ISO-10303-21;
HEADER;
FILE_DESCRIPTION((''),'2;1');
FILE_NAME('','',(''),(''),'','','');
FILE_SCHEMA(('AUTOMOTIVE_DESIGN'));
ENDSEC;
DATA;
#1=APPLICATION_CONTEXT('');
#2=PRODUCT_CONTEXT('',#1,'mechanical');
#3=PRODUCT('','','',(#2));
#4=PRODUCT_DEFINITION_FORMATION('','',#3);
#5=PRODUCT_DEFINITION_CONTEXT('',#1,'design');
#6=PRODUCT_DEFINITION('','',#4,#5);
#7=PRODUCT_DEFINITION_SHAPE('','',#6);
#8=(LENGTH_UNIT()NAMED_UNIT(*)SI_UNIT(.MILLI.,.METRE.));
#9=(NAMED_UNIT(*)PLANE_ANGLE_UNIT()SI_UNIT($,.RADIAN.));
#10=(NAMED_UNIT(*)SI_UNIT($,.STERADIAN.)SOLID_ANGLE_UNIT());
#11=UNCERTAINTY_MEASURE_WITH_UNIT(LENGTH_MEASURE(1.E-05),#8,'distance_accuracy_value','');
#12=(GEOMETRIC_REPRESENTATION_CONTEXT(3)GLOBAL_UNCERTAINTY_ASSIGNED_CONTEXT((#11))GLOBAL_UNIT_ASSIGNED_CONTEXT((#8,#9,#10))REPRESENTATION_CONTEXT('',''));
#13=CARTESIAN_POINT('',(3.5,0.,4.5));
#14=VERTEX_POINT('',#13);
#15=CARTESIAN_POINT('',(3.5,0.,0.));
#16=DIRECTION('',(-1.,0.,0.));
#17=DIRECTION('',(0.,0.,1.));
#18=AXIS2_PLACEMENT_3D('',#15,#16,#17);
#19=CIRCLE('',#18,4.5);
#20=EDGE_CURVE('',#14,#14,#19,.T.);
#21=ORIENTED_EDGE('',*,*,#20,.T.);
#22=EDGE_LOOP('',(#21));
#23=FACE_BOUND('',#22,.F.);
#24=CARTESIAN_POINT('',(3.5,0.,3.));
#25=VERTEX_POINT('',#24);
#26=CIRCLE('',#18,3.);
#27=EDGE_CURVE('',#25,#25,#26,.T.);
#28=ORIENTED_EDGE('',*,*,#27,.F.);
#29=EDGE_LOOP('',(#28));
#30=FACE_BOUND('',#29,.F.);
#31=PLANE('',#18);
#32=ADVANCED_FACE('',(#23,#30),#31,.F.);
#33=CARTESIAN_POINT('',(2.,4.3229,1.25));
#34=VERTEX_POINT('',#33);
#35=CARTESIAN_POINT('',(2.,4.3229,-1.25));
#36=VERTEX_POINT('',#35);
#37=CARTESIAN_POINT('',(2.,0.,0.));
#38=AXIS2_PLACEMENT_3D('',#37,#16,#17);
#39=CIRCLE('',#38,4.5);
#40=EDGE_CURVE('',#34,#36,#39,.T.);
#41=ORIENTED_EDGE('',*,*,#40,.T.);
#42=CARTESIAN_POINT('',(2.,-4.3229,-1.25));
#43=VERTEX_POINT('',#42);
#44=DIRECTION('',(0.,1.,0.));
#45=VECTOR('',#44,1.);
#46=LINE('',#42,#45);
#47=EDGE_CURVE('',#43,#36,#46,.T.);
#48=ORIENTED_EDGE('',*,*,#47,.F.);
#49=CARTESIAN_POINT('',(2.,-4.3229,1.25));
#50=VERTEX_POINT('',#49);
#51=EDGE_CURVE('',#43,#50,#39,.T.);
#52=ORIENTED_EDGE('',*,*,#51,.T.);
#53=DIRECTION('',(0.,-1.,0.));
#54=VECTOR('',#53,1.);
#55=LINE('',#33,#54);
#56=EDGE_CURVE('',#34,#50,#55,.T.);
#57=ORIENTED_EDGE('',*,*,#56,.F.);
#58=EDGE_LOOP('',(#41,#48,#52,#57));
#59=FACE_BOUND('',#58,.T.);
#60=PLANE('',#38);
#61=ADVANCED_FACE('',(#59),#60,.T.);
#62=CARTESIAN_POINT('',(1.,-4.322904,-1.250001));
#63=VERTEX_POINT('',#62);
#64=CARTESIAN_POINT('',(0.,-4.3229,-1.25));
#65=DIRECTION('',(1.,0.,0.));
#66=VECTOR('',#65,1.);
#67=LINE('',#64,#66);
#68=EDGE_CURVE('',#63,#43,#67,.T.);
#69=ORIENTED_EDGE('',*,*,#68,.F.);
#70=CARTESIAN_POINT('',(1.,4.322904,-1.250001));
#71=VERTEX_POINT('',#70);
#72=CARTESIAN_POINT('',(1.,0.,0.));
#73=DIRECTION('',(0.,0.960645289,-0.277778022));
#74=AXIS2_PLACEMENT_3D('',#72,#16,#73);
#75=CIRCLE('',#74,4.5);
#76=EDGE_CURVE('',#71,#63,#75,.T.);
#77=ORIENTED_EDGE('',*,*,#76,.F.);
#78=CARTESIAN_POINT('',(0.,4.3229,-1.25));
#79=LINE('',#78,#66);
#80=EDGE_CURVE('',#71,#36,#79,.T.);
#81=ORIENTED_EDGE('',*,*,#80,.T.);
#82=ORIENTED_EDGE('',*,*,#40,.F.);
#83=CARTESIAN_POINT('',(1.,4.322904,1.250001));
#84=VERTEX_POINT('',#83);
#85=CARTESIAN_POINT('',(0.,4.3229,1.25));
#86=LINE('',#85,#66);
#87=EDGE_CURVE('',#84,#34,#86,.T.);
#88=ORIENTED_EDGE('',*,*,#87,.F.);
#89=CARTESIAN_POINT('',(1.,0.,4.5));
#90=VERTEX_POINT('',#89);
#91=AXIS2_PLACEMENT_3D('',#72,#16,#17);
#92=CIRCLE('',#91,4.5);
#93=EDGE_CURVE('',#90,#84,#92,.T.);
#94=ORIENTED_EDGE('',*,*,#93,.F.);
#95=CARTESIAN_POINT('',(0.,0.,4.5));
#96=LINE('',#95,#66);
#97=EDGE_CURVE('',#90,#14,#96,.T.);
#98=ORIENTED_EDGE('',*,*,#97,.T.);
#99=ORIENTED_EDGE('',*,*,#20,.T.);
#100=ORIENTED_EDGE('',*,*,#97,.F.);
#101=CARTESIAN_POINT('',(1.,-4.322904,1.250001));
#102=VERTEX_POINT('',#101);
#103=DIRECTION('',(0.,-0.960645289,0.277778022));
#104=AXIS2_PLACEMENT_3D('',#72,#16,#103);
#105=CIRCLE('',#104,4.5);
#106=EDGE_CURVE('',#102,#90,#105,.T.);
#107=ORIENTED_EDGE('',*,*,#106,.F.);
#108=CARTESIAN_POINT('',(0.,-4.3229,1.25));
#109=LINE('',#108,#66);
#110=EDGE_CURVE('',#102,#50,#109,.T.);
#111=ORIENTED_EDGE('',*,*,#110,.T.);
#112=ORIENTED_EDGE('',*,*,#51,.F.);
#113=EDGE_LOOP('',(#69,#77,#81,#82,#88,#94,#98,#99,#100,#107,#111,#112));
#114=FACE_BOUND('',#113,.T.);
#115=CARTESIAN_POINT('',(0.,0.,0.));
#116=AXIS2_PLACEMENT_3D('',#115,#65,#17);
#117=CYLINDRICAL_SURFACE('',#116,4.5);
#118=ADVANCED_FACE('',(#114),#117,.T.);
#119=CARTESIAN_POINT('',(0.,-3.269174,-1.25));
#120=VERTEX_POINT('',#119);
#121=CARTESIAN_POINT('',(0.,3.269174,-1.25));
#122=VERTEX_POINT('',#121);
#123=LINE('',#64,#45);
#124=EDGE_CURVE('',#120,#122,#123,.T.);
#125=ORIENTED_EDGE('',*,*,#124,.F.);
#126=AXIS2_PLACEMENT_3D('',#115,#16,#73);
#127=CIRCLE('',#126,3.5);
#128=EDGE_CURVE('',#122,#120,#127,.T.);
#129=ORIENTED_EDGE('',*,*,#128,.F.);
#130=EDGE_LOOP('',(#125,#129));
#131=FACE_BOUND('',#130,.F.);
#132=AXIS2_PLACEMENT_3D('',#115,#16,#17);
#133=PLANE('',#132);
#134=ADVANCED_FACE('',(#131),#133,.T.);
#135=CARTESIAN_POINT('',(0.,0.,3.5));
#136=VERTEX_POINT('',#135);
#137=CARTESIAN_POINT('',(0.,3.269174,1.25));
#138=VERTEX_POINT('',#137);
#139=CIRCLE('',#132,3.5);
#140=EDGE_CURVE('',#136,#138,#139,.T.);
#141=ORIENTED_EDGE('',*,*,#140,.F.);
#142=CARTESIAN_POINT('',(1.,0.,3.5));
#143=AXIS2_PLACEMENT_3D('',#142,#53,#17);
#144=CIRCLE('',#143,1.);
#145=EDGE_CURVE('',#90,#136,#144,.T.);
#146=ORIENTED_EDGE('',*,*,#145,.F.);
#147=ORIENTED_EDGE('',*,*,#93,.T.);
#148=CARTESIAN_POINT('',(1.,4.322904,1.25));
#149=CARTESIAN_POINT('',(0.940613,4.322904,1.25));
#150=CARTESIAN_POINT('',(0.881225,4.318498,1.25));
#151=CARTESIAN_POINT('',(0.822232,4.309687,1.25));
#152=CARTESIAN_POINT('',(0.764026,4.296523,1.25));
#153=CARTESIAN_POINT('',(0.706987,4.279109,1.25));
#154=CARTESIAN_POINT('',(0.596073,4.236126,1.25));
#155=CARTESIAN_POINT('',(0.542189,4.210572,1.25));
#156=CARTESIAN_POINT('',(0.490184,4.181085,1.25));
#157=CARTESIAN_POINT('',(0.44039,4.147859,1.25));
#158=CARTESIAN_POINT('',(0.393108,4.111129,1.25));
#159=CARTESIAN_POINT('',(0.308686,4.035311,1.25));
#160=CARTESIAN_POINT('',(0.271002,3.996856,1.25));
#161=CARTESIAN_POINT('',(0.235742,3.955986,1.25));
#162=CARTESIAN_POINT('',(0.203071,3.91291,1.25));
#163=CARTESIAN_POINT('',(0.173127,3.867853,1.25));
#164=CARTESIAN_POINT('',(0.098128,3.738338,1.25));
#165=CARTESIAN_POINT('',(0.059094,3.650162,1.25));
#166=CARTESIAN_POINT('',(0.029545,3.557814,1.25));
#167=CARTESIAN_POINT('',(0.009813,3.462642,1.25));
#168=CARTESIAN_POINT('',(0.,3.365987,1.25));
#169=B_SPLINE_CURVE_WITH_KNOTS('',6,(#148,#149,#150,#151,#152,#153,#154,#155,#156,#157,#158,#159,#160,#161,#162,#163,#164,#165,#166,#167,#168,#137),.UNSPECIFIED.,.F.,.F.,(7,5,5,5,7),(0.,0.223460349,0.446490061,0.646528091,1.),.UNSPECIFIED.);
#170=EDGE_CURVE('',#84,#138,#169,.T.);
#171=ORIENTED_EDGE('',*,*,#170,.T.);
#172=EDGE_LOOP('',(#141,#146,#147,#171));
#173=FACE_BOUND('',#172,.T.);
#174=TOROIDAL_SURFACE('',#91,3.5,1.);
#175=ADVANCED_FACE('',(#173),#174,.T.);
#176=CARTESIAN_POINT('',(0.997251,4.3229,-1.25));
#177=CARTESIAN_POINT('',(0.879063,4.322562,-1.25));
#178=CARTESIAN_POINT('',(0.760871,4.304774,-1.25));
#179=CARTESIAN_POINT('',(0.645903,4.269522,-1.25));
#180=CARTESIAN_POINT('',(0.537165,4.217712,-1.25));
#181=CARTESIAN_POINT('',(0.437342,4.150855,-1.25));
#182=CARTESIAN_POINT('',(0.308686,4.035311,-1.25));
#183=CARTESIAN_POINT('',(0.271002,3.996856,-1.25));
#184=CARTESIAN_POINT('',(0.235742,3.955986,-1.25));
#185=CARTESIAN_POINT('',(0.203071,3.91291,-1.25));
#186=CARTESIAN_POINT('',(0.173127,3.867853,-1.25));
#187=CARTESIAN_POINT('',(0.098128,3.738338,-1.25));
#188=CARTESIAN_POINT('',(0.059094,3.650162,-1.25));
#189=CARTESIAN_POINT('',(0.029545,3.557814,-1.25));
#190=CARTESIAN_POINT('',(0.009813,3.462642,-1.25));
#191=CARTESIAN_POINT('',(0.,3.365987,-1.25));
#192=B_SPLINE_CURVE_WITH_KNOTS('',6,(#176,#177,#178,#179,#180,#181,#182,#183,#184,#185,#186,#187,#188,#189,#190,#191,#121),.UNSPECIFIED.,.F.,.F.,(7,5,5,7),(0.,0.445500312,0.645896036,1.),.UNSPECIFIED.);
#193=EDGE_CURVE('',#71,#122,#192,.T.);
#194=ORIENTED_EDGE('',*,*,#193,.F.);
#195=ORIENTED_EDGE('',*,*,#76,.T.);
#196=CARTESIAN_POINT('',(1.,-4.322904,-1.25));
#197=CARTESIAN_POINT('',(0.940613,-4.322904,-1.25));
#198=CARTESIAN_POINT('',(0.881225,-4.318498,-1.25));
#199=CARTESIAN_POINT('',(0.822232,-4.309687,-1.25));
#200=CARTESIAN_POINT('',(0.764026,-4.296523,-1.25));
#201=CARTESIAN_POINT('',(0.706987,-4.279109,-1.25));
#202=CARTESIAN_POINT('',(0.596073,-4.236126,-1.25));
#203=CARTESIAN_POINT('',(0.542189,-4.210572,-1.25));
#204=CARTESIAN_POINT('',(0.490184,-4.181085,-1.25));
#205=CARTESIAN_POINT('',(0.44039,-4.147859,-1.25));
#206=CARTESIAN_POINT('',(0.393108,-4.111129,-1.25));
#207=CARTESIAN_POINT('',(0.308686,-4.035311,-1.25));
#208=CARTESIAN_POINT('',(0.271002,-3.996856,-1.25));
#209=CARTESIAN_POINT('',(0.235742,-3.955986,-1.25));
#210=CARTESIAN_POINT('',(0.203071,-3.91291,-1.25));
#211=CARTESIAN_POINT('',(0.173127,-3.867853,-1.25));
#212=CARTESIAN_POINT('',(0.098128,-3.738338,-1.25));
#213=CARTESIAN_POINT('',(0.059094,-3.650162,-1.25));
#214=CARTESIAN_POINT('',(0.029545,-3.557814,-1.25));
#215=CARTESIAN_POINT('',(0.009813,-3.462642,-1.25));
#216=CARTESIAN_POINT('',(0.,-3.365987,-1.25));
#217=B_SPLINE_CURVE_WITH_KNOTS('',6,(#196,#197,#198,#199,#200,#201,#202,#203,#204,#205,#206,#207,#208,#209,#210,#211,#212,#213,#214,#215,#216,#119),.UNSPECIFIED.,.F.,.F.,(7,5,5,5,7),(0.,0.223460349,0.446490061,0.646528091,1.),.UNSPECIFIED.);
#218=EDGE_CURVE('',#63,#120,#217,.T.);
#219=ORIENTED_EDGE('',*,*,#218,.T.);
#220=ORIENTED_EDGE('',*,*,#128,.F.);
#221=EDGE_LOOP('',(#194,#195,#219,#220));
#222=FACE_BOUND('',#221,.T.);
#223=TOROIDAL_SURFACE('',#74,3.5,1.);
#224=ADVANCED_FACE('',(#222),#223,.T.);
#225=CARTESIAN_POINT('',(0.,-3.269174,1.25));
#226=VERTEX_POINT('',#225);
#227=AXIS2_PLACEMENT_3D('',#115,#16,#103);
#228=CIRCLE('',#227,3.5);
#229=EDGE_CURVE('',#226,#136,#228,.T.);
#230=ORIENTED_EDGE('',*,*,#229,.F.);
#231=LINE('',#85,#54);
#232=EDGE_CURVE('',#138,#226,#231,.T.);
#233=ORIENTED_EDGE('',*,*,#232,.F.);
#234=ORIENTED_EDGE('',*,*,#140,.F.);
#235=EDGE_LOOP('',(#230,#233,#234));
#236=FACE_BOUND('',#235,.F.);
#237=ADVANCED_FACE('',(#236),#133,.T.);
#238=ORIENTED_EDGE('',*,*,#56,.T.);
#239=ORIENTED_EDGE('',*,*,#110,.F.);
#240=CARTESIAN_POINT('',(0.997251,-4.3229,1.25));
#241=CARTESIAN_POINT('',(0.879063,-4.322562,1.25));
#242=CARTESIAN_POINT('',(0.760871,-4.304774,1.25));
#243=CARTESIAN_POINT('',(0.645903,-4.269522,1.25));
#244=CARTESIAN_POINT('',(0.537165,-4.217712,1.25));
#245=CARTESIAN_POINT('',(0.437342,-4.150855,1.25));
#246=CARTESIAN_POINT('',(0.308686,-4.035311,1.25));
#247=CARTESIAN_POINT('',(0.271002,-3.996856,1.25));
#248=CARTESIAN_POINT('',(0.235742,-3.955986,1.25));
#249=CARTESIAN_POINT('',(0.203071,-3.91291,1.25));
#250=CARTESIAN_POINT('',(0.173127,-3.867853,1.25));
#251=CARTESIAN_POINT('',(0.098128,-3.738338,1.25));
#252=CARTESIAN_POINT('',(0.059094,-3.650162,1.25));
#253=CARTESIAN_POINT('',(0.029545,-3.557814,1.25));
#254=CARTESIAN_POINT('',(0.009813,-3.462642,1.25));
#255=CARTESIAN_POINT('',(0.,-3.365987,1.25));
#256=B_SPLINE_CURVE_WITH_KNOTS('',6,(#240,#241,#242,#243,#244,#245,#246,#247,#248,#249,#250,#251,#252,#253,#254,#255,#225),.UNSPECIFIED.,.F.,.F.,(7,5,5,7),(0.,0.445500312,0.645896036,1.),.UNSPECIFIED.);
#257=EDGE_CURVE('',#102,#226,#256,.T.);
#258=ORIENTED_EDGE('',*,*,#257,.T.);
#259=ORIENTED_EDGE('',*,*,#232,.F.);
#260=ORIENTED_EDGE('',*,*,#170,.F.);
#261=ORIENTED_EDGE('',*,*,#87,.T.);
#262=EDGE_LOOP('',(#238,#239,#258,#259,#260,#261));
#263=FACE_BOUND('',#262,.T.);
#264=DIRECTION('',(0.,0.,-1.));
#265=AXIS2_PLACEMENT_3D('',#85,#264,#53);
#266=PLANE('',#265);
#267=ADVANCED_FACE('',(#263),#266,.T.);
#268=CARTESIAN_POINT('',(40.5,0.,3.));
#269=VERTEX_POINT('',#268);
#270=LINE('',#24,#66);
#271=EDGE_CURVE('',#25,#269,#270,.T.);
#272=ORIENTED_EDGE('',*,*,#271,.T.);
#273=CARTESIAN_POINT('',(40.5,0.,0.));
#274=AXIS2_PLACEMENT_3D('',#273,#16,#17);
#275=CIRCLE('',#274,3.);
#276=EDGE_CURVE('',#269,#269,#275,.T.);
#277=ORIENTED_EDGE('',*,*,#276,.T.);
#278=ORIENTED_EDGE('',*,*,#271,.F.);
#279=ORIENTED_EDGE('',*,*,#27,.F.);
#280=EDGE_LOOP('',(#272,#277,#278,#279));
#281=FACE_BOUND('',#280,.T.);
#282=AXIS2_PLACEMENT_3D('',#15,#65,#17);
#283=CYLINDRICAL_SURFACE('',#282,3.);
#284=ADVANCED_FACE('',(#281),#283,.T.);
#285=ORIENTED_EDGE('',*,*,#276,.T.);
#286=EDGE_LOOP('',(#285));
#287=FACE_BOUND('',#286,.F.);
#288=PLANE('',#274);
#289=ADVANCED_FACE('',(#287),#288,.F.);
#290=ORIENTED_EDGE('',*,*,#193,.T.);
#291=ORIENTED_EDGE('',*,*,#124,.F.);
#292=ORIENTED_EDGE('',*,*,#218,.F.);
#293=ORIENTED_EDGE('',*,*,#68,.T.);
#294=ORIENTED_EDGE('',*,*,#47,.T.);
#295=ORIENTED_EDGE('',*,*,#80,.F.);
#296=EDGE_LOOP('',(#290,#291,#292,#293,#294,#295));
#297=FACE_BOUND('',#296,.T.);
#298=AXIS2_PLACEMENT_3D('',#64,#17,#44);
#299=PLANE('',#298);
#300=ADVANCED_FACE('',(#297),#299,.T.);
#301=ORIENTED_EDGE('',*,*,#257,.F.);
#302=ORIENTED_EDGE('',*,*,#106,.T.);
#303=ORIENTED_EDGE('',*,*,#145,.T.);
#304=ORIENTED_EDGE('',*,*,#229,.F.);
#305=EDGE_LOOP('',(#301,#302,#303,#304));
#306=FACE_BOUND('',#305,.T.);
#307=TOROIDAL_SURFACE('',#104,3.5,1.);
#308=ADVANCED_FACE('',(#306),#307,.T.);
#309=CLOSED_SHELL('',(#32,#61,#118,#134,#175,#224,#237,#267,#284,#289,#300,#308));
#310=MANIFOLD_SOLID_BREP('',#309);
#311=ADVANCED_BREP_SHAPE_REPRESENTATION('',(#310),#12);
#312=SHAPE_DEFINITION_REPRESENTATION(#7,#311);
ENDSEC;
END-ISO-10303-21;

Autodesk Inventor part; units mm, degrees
ref_plane "YZ Plane" through (0, 0, 0) normal (1, 0, 0) x (0, 1, 0)
ref_plane "XZ Plane" through (0, 0, 0) normal (0, 1, 0) x (-1, 0, 0)
ref_plane "XY Plane" through (0, 0, 0) normal (0, 0, 1) x (1, 0, 0)
sketch "Skizze1" plane through (0, 0, 0) normal (0, 1, 0) x (-1, 0, 0)
  line L0 (0, 0) -> (0, 4.5)
  line L1 (0, 4.5) -> (-3.5, 4.5)
  line L2 (-3.5, 4.5) -> (-3.5, 3)
  line L3 (-3.5, 3) -> (-40.5, 3)
  line L4 (-40.5, 3) -> (-40.5, 0)
  line L5 (-40.5, 0) -> (0, 0)
  dimension "d0" = 3.5
  dimension "d1" = 6
  dimension "d2" = 9
  dimension "d3" = 37
revolve "Umdrehung1" add sketch "Skizze1" angle 360 about axis through (40.5, 0, 0) along (-1, 0, 0)
thread "Gewinde1" size "M6x1" class "6g" standard "ISO Metric profile" length 12
sketch "Skizze2" plane through (0, 0, 0) normal (-1, 0, 0) x (0, 0, 1)
  line L0 (1.25, 4.3229) -> (1.25, -4.3229)
  line L1 (-1.25, -4.3229) -> (-1.25, 4.3229)
  circle A0 centre (0, 0) radius 4.5 projected
  line L2 (0, 4.5) -> (0, -4.5) construction
  point P0 (0, 0)
  dimension "d7" = 2.5
extrude "Extrusion1" cut sketch "Skizze2" against normal blind 2 contours L0 A0 L1
fillet "Rundung1" radius 1 3 edges at (0, 2.7042, 3.5969) (0, -2.7042, 3.5969) (0, 0, -4.5)
properties part number "screw" material "Steel, Cast"
